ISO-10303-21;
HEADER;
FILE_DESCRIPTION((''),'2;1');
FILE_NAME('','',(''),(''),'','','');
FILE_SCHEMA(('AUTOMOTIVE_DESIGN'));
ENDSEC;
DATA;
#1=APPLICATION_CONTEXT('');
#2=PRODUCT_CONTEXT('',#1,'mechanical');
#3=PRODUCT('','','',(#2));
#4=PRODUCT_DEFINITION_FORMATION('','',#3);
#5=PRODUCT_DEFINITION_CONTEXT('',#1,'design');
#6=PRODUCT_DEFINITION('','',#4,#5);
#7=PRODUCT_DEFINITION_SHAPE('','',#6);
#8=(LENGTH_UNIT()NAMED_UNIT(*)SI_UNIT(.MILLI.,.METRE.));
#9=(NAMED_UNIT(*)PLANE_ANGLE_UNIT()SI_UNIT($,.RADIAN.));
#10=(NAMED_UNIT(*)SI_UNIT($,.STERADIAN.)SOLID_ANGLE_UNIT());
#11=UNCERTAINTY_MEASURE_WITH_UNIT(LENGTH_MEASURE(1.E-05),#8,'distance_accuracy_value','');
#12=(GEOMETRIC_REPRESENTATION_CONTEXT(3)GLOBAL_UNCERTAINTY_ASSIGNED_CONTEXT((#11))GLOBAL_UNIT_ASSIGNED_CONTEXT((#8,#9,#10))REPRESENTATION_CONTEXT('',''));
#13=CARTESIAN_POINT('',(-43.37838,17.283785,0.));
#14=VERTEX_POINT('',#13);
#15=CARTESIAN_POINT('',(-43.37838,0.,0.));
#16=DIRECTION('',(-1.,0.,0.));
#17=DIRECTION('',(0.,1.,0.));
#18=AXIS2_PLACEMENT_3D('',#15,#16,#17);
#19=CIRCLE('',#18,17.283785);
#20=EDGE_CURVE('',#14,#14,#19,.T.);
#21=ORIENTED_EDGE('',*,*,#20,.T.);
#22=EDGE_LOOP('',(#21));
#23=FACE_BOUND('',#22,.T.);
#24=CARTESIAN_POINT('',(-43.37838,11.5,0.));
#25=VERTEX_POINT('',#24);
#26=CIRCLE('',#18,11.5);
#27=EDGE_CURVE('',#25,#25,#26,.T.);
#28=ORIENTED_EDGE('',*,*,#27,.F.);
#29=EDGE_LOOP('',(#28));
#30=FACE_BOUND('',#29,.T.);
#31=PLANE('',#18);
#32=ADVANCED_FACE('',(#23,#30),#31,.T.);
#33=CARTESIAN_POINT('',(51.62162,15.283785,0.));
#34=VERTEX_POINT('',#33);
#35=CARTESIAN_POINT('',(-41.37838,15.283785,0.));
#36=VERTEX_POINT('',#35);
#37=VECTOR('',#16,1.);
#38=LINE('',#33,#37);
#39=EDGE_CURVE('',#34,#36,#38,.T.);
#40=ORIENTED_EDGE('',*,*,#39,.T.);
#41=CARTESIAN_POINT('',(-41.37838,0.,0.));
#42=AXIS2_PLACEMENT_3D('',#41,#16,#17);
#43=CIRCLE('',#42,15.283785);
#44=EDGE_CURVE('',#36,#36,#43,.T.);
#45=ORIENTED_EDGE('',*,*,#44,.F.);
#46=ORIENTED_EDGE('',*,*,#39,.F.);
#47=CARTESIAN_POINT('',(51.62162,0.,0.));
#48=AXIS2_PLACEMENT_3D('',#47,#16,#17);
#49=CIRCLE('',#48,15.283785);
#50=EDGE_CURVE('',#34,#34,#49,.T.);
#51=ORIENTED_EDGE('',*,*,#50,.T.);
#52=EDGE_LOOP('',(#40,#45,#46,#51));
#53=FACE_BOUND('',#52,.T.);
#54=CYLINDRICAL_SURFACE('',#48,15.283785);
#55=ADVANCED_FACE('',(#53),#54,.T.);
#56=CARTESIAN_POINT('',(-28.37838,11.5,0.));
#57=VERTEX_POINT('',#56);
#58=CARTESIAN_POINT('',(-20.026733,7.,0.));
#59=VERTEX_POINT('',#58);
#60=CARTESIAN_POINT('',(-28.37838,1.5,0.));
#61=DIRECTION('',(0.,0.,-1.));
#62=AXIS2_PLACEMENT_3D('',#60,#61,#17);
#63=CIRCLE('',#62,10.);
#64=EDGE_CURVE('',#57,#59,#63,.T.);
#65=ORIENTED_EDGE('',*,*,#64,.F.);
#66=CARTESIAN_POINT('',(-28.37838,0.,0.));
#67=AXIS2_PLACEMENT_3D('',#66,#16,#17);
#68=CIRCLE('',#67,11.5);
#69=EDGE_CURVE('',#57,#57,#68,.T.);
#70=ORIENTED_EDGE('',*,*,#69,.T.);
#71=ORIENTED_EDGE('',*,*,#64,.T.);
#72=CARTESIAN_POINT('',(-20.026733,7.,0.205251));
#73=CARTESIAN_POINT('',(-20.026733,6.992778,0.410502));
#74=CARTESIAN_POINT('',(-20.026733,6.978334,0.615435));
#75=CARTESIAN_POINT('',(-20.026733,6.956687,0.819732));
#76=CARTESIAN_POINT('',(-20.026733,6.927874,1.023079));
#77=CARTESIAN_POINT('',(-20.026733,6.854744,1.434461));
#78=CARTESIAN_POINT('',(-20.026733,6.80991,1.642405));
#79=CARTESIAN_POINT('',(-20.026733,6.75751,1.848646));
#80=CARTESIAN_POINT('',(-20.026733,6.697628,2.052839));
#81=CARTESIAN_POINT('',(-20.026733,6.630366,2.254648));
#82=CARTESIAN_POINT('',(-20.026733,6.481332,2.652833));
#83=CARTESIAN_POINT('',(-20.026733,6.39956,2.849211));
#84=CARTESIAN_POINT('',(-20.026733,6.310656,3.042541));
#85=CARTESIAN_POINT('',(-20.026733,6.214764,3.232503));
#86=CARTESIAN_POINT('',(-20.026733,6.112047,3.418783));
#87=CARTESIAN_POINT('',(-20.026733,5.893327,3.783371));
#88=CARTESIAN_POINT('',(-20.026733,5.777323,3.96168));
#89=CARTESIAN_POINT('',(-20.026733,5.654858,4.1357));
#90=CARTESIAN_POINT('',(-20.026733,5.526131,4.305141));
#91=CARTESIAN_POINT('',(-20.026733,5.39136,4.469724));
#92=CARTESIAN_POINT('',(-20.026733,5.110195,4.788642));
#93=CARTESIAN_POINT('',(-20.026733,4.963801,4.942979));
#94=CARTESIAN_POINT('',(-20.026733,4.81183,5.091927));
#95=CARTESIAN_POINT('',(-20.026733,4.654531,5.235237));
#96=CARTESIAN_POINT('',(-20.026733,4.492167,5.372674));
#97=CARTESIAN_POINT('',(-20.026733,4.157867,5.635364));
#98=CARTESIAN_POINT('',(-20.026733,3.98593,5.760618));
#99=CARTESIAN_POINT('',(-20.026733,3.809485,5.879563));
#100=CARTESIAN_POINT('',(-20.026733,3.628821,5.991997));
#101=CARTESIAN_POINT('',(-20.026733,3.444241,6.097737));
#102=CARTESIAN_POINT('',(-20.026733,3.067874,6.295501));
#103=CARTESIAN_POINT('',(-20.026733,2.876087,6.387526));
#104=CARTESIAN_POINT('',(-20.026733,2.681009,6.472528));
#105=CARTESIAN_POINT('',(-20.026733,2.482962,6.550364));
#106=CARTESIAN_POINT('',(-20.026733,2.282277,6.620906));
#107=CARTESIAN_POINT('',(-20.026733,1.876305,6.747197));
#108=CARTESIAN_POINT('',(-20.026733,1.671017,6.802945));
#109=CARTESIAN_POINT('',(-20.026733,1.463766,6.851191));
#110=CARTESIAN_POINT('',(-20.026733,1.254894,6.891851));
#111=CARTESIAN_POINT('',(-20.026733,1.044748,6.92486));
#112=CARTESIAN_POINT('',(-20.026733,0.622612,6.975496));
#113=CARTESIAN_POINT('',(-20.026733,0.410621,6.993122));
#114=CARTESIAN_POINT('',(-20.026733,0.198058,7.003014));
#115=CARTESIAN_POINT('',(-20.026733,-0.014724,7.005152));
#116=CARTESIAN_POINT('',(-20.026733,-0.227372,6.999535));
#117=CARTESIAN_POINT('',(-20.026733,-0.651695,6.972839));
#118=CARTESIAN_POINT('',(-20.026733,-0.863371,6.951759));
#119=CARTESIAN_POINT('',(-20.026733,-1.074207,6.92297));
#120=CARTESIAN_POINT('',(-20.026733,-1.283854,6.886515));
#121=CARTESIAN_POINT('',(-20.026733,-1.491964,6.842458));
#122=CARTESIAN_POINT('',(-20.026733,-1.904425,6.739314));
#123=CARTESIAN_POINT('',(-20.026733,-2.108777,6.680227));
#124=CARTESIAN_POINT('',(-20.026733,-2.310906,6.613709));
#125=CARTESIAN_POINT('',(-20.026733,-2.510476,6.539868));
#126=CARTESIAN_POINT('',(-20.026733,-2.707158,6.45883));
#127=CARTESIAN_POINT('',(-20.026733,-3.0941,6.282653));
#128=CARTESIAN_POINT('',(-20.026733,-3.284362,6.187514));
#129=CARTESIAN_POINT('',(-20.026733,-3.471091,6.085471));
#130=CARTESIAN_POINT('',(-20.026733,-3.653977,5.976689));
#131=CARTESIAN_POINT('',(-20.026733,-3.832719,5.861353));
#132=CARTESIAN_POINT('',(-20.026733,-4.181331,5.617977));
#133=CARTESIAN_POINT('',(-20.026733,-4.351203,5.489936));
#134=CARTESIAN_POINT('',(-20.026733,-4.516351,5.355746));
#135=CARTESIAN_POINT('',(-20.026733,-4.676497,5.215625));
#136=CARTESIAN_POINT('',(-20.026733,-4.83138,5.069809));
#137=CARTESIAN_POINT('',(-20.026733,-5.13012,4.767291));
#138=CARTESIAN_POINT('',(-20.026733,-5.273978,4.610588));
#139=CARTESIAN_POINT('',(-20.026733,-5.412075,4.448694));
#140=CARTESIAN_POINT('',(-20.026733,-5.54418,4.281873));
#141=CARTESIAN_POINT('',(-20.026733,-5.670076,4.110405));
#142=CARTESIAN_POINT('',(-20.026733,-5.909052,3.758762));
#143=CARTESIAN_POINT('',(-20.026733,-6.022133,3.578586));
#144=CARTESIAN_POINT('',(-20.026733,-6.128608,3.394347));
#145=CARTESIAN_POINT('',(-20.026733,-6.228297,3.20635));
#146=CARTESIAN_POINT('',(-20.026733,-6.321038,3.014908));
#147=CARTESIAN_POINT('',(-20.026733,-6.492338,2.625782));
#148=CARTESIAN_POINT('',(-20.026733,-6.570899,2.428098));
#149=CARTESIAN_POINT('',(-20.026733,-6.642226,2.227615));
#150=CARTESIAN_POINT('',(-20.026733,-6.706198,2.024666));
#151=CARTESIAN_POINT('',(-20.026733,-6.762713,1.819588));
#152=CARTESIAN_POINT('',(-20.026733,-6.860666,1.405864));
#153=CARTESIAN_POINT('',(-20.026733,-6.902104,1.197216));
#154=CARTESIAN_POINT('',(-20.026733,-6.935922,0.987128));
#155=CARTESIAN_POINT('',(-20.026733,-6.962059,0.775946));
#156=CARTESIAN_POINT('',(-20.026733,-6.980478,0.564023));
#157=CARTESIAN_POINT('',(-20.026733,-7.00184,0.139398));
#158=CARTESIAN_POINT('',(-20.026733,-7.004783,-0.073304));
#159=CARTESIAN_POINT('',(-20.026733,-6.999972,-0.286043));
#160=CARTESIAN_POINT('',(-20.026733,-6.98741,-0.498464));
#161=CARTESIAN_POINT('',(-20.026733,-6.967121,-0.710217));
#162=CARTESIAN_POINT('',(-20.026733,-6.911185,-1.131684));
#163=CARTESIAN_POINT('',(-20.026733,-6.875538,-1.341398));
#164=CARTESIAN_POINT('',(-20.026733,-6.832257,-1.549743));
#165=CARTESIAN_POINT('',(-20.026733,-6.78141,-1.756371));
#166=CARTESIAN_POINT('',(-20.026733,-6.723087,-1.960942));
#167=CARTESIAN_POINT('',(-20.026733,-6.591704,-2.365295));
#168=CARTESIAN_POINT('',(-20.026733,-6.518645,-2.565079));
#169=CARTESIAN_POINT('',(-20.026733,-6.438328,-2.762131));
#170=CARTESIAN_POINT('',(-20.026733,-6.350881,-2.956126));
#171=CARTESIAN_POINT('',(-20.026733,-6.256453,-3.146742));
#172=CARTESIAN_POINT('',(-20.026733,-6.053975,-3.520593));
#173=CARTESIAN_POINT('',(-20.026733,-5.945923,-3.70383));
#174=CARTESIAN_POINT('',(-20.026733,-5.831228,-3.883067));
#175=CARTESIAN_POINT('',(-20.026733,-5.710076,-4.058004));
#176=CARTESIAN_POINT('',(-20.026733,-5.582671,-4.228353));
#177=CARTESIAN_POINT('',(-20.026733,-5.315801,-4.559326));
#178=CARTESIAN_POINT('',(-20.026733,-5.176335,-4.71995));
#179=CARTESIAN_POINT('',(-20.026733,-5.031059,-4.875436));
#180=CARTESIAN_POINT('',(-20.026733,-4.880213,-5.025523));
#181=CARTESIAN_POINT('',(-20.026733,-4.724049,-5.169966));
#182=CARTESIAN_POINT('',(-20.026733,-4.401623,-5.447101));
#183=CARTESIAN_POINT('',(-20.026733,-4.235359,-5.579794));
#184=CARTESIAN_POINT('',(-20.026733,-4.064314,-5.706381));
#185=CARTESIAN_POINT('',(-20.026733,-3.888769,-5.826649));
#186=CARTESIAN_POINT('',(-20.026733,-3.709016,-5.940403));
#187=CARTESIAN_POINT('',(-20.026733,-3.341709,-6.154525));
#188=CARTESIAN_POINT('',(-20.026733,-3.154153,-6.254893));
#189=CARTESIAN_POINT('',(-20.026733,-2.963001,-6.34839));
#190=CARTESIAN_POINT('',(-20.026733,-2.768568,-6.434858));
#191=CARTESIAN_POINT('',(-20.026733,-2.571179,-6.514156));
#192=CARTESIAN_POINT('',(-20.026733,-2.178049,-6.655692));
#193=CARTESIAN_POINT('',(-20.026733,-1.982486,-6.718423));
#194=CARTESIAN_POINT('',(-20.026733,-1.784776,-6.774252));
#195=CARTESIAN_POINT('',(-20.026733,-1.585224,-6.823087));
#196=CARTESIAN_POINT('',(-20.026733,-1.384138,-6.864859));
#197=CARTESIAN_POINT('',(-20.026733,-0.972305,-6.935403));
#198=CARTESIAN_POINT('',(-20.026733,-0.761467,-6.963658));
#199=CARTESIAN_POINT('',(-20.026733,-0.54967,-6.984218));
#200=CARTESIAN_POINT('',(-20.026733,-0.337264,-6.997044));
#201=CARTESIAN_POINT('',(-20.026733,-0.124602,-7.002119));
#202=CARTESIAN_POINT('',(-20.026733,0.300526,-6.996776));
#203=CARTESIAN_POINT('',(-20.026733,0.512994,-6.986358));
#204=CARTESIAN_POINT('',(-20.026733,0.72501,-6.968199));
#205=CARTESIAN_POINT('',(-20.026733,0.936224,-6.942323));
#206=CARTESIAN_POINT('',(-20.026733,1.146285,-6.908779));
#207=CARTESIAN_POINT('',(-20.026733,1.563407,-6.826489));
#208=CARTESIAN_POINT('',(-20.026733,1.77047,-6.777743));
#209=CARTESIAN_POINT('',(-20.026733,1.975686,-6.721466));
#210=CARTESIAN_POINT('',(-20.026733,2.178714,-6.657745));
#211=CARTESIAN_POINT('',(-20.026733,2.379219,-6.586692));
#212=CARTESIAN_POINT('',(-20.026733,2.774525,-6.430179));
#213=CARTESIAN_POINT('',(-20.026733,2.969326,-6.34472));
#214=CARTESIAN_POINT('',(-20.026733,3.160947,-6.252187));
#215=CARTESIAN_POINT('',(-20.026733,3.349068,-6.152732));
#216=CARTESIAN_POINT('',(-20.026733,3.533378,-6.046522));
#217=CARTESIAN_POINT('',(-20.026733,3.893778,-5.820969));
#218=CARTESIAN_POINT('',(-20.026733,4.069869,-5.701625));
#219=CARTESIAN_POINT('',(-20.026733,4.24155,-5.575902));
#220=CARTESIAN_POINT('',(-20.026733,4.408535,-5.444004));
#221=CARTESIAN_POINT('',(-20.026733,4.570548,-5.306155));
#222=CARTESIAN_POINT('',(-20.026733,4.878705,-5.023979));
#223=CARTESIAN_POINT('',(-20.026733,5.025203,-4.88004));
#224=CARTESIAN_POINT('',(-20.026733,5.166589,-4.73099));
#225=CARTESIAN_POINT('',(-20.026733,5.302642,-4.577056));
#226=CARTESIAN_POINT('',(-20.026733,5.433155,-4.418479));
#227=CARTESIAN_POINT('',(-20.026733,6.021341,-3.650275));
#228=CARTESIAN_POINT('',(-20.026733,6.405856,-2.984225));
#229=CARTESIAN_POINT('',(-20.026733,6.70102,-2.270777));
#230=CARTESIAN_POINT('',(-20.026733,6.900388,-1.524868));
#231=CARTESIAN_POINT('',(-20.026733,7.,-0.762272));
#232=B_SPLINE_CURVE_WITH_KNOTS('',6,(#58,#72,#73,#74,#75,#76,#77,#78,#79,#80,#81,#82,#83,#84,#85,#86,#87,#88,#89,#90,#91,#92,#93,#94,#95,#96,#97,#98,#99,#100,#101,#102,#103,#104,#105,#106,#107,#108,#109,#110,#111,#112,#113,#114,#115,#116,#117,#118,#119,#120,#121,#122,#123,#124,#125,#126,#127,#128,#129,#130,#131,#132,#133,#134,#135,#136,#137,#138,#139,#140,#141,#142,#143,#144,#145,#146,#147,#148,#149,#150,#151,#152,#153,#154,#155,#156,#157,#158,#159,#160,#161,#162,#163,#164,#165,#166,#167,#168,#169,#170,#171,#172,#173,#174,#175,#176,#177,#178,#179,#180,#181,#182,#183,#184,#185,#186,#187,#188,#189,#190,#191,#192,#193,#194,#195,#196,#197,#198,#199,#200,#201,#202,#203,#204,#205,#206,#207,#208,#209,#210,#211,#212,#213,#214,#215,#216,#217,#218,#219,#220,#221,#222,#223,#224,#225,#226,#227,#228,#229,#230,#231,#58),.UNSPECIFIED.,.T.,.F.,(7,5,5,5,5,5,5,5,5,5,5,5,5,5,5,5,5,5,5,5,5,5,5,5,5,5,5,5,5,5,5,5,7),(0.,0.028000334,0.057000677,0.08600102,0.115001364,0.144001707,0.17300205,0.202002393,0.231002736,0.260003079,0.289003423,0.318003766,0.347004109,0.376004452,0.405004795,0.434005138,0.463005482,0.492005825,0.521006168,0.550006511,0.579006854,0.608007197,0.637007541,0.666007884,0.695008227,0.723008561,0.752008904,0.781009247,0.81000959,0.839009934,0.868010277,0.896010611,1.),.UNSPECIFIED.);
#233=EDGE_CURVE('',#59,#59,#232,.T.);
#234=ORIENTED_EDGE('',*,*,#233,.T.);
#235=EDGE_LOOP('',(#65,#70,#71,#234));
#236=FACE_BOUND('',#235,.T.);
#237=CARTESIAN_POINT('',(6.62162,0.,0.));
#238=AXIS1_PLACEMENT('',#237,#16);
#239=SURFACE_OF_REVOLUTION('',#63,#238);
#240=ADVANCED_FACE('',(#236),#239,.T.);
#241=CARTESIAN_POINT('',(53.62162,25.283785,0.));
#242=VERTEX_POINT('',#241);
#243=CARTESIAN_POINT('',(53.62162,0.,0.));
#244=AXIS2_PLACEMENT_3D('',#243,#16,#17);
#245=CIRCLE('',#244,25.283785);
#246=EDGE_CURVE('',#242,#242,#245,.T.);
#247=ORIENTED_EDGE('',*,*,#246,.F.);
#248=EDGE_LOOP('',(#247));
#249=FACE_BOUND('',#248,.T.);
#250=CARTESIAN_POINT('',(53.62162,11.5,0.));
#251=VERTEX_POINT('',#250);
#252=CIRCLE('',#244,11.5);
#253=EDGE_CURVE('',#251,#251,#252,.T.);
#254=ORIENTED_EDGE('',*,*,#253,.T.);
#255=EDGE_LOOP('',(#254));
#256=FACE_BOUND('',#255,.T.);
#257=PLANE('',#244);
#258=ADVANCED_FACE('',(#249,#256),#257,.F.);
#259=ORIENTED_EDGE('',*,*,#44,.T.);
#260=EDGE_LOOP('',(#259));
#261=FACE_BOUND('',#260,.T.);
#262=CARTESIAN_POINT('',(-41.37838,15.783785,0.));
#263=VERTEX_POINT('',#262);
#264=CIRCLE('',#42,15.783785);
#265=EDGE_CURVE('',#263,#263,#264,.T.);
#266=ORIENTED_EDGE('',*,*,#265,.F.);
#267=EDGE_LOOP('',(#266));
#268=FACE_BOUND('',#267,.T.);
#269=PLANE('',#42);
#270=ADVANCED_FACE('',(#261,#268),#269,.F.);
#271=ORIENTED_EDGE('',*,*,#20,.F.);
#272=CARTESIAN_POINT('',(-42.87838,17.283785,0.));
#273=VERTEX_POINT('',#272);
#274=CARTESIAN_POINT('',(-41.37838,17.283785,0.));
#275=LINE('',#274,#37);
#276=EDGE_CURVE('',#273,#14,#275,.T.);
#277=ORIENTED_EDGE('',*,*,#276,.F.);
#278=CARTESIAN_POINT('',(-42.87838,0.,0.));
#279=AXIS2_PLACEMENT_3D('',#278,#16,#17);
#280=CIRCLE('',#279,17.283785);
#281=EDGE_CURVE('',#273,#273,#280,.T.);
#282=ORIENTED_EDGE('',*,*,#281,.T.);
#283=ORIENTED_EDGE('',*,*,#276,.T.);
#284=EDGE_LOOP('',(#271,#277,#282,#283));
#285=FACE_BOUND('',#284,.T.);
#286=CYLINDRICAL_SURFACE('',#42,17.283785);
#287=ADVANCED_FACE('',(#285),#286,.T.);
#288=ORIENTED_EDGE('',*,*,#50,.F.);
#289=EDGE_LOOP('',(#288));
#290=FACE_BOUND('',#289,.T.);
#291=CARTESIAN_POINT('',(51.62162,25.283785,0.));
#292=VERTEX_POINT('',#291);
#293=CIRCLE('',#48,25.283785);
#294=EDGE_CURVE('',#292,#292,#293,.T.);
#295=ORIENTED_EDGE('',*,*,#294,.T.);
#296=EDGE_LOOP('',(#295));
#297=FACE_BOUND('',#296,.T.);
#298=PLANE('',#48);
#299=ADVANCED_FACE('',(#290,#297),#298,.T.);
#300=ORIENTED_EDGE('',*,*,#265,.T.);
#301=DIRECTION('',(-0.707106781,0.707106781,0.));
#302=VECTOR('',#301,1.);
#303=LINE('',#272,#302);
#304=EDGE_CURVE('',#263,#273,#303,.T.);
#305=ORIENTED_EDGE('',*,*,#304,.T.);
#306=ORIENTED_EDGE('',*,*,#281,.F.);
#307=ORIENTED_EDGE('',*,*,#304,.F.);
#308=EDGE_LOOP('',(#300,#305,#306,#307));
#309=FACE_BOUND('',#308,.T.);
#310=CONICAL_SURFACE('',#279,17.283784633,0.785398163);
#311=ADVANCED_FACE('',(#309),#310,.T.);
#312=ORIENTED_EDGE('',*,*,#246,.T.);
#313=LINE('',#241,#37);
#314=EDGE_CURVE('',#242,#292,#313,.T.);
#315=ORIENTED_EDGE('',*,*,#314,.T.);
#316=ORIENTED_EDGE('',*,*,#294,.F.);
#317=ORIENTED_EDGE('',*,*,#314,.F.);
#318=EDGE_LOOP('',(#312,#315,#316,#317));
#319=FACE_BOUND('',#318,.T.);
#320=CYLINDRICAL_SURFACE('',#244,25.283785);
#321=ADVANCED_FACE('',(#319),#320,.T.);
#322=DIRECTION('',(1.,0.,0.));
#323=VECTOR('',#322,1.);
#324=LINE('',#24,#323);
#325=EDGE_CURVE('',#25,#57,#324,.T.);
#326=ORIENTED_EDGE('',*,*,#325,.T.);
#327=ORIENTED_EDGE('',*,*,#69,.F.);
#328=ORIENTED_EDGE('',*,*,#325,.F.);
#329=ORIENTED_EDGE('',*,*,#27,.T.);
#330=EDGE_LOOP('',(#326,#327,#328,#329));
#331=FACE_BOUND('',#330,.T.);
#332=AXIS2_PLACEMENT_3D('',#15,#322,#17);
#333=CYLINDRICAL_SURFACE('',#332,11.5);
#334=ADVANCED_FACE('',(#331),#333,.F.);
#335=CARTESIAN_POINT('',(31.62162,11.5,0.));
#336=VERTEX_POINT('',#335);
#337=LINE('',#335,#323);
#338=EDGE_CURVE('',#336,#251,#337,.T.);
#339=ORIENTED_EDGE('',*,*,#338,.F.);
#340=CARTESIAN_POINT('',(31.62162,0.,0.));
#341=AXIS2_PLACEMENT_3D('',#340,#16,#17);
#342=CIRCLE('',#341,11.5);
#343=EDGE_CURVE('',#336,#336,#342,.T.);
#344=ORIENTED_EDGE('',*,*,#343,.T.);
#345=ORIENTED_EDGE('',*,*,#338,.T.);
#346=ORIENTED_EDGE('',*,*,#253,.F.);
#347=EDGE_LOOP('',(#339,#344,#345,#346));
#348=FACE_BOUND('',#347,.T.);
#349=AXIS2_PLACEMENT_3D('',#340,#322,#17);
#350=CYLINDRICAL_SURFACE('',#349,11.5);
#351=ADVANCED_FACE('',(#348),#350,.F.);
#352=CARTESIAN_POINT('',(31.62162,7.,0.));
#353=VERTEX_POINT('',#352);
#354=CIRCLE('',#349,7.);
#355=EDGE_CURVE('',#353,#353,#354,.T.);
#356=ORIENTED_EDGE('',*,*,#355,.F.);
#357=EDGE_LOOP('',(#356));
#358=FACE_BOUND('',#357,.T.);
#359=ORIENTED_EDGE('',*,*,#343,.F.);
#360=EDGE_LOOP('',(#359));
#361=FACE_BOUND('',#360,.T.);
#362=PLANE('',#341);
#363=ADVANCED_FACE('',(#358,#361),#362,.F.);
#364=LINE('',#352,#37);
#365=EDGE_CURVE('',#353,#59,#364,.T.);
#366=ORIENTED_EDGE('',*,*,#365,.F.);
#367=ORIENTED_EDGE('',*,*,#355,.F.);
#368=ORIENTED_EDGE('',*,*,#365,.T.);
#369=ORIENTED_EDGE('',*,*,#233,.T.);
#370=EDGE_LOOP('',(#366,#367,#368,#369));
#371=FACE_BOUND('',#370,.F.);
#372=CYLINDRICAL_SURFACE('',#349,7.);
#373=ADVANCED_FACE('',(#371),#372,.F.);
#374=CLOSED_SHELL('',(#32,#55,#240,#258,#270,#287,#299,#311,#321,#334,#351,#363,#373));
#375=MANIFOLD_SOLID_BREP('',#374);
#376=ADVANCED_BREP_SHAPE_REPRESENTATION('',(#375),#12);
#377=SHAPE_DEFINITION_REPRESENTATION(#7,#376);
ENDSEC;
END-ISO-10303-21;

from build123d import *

# Parameters (mm, degrees)
F2_SIZE  = 1.5
F3_R     = 7
F4_DEPTH = 75.001


# Not quite as in the source:
# - a feature names something its author has since deleted; it is built from what else it names


with BuildPart() as f1:
    # F0 (on Top) → F1 (revolve)
    with BuildSketch(Plane.XY):
        with BuildLine():
            Line((-18.3783795104, 0), (31.6216204896, 0))
            Line((31.6216204896, 0), (31.6216204896, 11.5))
            Line((31.6216204896, 11.5), (53.6216204896, 11.5))
            Line((53.6216204896, 11.5), (53.6216204896, 15.2837846328))
            Line((53.6216204896, 15.2837846328), (53.6216204896, 25.2837846328))
            Line((53.6216204896, 25.2837846328), (51.6216204896, 25.2837846328))
            Line((51.6216204896, 25.2837846328), (51.6216204896, 15.2837846328))
            Line((51.6216204896, 15.2837846328), (39.6216204896, 15.2837846328))
            Line((39.6216204896, 15.2837846328), (-41.3783795104, 15.2837846328))
            Line((-41.3783795104, 15.2837846328), (-41.3783795104, 17.2837846328))
            Line((-41.3783795104, 17.2837846328), (-43.3783795104, 17.2837846328))
            Line((-43.3783795104, 17.2837846328), (-43.3783795104, 15.2837846328))
            Line((-43.3783795104, 15.2837846328), (-43.3783795104, 11.5))
            Line((-43.3783795104, 11.5), (-28.3783795104, 11.5))
            ThreePointArc((-28.3783795104, 11.5), (-21.3073116985, 8.5710678119), (-18.3783795104, 1.5))
            Line((-18.3783795104, 1.5), (-18.3783795104, 0))
        make_face()
    revolve(axis=Axis((6.6216204896, 0, 0), (-1, 0, 0)))

    # F2
    f2_edges = [f1.edges().sort_by_distance(p)[0] for p in [
        (-41.37838, -17.283785, 0),
    ]]
    chamfer(f2_edges, length=F2_SIZE)

    # F3 (on face) → F4 (cut, through all)
    with BuildSketch(Plane.YZ.offset(31.6216204896)):
        Circle(F3_R)
    extrude(amount=-F4_DEPTH, mode=Mode.SUBTRACT)


solid = f1.part
